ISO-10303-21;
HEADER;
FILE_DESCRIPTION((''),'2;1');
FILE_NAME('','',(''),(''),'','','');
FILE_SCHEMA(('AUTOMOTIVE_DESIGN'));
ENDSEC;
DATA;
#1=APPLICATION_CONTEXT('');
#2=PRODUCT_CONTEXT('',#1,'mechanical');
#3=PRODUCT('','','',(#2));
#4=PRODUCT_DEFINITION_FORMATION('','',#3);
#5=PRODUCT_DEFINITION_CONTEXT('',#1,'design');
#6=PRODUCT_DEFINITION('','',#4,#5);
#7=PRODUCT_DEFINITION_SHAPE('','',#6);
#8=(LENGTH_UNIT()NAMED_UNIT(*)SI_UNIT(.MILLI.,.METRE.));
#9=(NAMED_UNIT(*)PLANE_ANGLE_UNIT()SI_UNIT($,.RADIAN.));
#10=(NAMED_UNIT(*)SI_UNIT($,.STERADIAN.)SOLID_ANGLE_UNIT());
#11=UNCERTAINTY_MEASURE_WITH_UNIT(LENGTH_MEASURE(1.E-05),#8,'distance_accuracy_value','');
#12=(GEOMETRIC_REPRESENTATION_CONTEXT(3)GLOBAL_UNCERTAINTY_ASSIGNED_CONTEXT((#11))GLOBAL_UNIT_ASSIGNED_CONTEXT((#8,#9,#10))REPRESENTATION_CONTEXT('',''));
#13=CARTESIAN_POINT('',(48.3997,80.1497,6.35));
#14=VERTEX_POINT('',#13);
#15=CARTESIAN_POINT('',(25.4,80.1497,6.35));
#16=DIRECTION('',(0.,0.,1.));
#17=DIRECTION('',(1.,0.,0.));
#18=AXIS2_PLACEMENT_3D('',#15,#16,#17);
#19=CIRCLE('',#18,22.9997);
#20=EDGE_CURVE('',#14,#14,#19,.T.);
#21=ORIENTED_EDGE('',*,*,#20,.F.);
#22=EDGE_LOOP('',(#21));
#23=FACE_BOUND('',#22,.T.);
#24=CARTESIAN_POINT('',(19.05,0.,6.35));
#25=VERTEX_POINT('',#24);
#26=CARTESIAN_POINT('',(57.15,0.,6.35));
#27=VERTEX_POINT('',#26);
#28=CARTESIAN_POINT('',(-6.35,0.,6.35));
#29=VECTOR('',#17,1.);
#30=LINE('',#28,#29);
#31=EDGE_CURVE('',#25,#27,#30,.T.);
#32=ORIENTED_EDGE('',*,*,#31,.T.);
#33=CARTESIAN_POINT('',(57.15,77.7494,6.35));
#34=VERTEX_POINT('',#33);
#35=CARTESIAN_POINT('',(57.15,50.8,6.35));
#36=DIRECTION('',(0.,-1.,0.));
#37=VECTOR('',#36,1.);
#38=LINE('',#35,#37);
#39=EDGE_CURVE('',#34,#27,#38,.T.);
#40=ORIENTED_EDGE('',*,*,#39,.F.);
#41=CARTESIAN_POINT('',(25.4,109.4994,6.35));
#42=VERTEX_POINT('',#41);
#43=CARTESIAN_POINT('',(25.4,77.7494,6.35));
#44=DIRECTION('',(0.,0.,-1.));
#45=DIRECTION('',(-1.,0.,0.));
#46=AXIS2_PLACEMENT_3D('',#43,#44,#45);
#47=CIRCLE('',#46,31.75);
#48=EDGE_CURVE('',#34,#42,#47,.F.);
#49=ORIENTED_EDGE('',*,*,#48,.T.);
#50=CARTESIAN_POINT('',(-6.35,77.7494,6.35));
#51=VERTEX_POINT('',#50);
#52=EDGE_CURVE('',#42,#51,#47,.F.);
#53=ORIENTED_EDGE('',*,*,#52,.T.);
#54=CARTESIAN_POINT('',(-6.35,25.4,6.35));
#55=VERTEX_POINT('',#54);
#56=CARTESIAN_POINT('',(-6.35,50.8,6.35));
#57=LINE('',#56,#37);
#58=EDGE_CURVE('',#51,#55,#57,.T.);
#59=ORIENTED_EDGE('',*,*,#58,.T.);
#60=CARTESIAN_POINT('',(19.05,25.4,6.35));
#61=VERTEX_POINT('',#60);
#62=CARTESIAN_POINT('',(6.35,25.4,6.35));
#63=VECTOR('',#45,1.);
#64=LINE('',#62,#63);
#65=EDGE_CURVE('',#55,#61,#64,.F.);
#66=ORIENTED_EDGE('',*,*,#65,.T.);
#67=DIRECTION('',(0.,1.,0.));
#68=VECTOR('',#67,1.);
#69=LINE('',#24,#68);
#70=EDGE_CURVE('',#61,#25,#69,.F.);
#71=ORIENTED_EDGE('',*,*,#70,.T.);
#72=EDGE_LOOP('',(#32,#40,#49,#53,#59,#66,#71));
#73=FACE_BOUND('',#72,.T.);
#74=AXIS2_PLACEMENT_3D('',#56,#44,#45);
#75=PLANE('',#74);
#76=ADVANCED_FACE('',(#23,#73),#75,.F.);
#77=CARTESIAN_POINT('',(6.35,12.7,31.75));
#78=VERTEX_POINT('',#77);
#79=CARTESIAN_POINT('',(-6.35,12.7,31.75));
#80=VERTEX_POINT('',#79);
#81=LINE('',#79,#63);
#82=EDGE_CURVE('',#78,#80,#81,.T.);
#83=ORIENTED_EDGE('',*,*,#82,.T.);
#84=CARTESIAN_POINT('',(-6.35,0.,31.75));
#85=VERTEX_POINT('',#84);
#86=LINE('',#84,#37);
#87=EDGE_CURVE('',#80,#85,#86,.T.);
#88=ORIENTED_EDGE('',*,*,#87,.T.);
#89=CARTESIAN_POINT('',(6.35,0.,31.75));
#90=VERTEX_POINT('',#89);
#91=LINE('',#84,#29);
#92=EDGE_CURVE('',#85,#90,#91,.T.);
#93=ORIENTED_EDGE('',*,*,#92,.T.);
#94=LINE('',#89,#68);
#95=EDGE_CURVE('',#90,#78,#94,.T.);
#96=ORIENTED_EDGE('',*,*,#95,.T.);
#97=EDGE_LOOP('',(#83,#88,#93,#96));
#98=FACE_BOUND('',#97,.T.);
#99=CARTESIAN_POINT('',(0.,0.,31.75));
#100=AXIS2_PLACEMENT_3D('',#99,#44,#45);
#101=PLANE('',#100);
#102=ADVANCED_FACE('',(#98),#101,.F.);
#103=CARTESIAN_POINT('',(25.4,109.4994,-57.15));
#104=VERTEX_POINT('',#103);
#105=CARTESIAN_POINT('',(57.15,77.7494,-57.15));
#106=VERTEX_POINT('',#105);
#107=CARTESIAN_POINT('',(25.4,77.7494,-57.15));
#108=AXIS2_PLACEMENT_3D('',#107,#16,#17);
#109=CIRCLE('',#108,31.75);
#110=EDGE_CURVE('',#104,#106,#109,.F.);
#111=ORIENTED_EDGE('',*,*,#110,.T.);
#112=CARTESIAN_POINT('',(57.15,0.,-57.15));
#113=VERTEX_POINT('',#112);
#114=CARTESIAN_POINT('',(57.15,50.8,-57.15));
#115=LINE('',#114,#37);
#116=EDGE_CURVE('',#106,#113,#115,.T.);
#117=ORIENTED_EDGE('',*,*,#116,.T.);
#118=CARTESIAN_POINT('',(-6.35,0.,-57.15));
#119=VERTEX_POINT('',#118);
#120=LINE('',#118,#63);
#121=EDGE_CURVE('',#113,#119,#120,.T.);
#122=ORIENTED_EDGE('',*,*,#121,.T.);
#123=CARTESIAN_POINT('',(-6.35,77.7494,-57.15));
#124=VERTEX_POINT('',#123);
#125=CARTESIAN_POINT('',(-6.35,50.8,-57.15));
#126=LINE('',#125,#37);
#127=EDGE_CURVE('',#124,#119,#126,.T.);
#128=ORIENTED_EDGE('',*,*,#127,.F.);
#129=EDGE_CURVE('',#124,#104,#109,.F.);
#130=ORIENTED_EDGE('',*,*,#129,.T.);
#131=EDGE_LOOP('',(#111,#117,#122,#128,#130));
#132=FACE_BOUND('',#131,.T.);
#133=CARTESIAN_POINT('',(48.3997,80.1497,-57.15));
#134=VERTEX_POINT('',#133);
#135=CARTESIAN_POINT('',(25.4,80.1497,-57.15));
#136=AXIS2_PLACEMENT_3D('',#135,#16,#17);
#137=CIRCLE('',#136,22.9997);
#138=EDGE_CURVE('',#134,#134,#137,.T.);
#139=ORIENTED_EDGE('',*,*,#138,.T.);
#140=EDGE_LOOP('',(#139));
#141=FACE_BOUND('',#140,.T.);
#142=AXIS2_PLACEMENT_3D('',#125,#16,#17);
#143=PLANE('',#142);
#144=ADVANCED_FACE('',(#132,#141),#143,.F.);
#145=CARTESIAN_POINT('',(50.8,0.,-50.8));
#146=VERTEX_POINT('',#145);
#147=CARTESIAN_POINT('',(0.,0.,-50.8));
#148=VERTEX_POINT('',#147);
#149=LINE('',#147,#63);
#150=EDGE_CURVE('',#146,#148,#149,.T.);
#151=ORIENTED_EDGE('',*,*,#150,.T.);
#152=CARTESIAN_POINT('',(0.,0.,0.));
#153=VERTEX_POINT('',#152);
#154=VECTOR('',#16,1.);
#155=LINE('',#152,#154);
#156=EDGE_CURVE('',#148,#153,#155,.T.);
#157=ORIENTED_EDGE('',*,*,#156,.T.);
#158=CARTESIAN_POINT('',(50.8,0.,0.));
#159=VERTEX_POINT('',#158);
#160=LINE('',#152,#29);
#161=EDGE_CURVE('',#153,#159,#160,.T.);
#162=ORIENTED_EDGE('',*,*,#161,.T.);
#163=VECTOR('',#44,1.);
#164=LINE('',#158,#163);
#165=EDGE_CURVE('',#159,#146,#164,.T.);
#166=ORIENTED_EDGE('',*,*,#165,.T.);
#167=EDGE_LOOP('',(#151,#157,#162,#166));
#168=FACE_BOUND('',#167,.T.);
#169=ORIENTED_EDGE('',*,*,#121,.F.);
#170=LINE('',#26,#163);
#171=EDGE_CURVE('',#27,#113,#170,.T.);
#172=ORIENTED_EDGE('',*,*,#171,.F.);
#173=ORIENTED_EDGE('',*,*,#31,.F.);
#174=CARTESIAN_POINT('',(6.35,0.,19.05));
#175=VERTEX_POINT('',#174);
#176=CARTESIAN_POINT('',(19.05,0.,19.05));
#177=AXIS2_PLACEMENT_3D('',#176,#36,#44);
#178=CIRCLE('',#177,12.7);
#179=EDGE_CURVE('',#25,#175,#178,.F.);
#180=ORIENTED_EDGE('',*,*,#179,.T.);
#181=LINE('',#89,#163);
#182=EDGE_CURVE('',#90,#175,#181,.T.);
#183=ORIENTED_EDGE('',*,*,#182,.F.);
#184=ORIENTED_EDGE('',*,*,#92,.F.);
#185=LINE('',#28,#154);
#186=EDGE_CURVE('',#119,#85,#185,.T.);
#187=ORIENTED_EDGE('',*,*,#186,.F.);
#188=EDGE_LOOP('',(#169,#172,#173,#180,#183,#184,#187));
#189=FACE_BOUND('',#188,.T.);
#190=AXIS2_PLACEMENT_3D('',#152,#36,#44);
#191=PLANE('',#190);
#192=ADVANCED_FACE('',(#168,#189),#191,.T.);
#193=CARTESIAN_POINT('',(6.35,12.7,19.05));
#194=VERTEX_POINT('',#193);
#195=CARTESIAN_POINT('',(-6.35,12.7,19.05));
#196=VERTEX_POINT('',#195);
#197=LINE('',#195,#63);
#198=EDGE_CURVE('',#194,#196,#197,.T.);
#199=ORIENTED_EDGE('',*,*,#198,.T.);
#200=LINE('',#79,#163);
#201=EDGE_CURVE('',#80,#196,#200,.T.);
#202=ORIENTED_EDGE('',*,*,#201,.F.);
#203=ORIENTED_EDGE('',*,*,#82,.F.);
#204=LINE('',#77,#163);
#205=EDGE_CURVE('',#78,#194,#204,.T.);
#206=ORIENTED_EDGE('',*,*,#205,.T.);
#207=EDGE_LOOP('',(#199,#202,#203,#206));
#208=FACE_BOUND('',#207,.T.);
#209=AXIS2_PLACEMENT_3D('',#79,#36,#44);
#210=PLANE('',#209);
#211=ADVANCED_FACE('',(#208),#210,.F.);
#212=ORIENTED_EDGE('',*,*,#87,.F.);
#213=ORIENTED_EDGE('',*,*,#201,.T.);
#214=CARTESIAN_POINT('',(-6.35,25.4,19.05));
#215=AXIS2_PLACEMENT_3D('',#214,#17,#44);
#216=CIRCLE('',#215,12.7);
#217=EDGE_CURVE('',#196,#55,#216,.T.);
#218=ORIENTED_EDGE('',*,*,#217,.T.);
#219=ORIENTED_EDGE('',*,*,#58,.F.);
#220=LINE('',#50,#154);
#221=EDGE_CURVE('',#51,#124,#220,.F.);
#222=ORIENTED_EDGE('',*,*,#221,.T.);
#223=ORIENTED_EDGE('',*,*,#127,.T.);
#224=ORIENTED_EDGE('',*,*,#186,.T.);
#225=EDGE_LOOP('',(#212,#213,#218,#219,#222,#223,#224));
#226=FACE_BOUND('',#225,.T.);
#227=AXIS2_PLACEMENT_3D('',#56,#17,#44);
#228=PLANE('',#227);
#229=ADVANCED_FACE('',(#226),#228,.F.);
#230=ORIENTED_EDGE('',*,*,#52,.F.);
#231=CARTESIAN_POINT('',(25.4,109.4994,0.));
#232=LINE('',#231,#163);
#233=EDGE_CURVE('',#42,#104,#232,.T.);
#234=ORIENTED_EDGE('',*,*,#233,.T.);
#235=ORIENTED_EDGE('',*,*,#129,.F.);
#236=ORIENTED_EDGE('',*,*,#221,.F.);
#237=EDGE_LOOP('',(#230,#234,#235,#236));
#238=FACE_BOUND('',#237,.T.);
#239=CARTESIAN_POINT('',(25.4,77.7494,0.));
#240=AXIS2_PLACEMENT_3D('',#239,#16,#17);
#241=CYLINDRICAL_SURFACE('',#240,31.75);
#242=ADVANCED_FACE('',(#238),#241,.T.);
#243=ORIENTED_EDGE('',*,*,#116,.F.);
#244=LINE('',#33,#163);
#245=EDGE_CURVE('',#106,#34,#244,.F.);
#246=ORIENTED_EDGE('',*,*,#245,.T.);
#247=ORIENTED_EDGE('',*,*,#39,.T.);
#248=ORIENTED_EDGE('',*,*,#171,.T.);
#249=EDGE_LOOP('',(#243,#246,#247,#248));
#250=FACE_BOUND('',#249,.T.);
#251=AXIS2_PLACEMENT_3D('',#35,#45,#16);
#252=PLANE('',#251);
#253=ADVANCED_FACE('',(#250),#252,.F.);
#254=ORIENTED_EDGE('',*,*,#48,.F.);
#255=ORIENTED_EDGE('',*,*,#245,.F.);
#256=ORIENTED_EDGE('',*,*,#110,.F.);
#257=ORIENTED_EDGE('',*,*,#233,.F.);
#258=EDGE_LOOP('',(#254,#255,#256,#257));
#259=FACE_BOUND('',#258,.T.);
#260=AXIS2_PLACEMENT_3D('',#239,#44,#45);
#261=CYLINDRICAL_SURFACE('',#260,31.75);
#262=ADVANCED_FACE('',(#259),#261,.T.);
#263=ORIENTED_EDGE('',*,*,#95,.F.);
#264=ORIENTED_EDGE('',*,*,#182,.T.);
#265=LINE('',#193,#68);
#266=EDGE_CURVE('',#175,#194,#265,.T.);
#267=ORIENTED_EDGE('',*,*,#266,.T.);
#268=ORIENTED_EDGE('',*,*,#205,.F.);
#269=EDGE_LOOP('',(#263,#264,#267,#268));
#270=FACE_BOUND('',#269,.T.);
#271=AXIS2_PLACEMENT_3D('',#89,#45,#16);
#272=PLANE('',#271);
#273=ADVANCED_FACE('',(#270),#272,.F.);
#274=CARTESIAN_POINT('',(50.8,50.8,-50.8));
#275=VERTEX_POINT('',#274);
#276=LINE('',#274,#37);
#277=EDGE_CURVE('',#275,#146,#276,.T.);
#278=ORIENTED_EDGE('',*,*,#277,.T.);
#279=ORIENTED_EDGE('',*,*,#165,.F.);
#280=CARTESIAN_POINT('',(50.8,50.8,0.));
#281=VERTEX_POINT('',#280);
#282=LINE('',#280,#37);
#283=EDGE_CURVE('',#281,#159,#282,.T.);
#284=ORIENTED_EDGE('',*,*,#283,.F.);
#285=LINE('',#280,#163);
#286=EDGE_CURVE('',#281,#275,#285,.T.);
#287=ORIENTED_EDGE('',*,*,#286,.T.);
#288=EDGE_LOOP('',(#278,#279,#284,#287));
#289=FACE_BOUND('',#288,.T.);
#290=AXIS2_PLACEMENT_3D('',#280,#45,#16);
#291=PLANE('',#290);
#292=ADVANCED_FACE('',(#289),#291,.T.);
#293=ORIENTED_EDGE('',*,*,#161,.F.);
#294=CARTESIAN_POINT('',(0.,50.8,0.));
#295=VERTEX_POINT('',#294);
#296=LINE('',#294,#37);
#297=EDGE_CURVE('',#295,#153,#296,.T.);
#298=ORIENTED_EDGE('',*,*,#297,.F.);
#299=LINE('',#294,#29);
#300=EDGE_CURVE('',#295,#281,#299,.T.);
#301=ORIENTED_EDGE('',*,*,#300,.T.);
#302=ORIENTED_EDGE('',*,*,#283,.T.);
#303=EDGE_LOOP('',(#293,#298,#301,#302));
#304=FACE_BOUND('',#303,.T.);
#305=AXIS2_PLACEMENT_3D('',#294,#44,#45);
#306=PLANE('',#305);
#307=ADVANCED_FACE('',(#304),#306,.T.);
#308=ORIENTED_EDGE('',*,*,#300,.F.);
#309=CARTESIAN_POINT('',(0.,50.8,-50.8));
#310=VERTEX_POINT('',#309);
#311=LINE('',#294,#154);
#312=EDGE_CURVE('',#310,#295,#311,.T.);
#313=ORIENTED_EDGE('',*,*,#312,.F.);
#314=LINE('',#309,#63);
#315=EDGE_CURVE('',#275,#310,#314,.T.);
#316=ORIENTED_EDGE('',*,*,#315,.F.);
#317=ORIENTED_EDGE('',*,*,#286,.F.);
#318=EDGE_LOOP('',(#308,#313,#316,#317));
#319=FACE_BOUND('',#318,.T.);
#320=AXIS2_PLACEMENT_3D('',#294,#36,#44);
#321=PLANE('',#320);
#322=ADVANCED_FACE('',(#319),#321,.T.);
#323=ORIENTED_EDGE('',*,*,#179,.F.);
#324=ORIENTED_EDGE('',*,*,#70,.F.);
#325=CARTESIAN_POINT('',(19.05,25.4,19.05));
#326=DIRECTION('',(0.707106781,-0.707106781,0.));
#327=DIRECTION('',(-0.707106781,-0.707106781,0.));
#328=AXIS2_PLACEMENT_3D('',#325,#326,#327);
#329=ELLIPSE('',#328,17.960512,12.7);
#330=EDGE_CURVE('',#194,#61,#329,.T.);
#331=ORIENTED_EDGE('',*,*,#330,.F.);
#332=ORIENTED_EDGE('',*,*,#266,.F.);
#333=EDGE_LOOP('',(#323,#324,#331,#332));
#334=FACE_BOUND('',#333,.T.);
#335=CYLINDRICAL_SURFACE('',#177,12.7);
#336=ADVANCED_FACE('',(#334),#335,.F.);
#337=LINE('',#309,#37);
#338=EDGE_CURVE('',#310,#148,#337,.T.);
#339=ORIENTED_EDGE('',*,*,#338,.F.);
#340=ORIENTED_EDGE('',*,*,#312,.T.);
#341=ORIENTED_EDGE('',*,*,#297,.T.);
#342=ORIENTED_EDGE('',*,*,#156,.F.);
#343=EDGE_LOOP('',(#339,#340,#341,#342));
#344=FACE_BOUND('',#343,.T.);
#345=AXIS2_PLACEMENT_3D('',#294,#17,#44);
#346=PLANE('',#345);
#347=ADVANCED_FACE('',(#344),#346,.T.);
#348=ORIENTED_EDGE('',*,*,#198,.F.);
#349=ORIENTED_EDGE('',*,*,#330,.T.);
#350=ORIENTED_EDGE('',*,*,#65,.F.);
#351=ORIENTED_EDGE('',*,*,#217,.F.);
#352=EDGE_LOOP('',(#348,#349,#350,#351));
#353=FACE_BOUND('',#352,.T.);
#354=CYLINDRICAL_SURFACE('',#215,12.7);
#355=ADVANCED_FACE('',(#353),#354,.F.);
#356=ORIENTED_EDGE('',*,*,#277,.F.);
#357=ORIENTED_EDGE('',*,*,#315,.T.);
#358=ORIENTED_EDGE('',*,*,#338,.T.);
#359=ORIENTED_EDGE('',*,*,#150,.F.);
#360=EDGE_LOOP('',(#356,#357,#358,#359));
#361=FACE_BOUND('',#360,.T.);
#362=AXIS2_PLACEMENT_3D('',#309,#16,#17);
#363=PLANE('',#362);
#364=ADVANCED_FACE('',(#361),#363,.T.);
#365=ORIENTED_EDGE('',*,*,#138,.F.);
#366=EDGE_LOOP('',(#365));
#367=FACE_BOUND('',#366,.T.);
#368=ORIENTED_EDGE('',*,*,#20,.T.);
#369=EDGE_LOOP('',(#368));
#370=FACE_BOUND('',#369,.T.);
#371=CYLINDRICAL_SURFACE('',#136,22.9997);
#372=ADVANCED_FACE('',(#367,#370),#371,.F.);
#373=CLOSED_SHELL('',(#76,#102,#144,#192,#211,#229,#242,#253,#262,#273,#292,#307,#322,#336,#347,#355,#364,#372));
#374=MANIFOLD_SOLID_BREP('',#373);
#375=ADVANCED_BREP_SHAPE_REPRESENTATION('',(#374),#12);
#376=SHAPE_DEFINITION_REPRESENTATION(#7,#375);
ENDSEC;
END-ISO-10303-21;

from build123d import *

# Parameters (mm, degrees)
SKETCH1_W           = 63.5
SKETCH1_H           = 63.5
SKETCH1_W_2         = 50.8
SKETCH1_H_2         = 50.8
BOSS_EXTRUDE1_DEPTH = 50.8
SKETCH2_W           = 63.5
SKETCH2_H           = 63.5
BOSS_EXTRUDE3_DEPTH = 6.35
SKETCH3_W           = 63.5
SKETCH3_H           = 63.5
BOSS_EXTRUDE4_DEPTH = 52.3494
SKETCH4_R           = 22.9997
CUT_EXTRUDE1_DEPTH  = 139.883012281
FILLET2_R           = 31.75
SKETCH5_W           = 12.7
SKETCH5_H           = 12.7
BOSS_EXTRUDE5_DEPTH = 25.4
FILLET3_R           = 12.7


with BuildPart() as part:
    # Sketch1 → Boss-Extrude1 (new body)
    with BuildSketch(Plane(origin=(0, 0, 0), x_dir=(1, 0, 0), z_dir=(0, 1, 0))):
        with Locations((25.4, 25.4)):
            Rectangle(SKETCH1_W, SKETCH1_H)
        with Locations((25.4, 25.4)):
            Rectangle(SKETCH1_W_2, SKETCH1_H_2, mode=Mode.SUBTRACT)
    extrude(amount=BOSS_EXTRUDE1_DEPTH)

    # Sketch2 → Boss-Extrude3 (add)
    with BuildSketch(Plane(origin=(0, 50.8, 0), x_dir=(1, 0, 0), z_dir=(0, 1, 0))):
        with Locations((25.4, 25.4)):
            Rectangle(SKETCH2_W, SKETCH2_H)
    extrude(amount=BOSS_EXTRUDE3_DEPTH)

    # Sketch3 → Boss-Extrude4 (add)
    with BuildSketch(Plane(origin=(0, 57.15, 0), x_dir=(1, 0, 0), z_dir=(0, 1, 0))):
        with Locations((25.4, 25.4)):
            Rectangle(SKETCH3_W, SKETCH3_H)
    extrude(amount=BOSS_EXTRUDE4_DEPTH)

    # Sketch4 → Cut-Extrude1 (cut, through all)
    with BuildSketch(Plane.XY.offset(6.35)):
        with Locations((25.4, 80.1497)):
            Circle(SKETCH4_R)
    extrude(amount=-CUT_EXTRUDE1_DEPTH, mode=Mode.SUBTRACT)

    # Fillet2
    fillet2_edges = [part.edges().sort_by_distance(p)[0] for p in [
        (-6.35, 109.4994, -25.4),
        (57.15, 109.4994, -25.4),
    ]]
    fillet(fillet2_edges, radius=FILLET2_R - 0.0001)  # a hair under: the kernel refuses the full size

    # Sketch5 → Boss-Extrude5 (add)
    with BuildSketch(Plane.XY.offset(6.35)):
        with Locations((0, 6.35)):
            Rectangle(SKETCH5_W, SKETCH5_H)
    extrude(amount=BOSS_EXTRUDE5_DEPTH)

    # Fillet3
    fillet3_edges = [part.edges().sort_by_distance(p)[0] for p in [
        (6.35, 6.35, 6.35),
        (0, 12.7, 6.35),
    ]]
    fillet(fillet3_edges, radius=FILLET3_R)


solid = part.part
